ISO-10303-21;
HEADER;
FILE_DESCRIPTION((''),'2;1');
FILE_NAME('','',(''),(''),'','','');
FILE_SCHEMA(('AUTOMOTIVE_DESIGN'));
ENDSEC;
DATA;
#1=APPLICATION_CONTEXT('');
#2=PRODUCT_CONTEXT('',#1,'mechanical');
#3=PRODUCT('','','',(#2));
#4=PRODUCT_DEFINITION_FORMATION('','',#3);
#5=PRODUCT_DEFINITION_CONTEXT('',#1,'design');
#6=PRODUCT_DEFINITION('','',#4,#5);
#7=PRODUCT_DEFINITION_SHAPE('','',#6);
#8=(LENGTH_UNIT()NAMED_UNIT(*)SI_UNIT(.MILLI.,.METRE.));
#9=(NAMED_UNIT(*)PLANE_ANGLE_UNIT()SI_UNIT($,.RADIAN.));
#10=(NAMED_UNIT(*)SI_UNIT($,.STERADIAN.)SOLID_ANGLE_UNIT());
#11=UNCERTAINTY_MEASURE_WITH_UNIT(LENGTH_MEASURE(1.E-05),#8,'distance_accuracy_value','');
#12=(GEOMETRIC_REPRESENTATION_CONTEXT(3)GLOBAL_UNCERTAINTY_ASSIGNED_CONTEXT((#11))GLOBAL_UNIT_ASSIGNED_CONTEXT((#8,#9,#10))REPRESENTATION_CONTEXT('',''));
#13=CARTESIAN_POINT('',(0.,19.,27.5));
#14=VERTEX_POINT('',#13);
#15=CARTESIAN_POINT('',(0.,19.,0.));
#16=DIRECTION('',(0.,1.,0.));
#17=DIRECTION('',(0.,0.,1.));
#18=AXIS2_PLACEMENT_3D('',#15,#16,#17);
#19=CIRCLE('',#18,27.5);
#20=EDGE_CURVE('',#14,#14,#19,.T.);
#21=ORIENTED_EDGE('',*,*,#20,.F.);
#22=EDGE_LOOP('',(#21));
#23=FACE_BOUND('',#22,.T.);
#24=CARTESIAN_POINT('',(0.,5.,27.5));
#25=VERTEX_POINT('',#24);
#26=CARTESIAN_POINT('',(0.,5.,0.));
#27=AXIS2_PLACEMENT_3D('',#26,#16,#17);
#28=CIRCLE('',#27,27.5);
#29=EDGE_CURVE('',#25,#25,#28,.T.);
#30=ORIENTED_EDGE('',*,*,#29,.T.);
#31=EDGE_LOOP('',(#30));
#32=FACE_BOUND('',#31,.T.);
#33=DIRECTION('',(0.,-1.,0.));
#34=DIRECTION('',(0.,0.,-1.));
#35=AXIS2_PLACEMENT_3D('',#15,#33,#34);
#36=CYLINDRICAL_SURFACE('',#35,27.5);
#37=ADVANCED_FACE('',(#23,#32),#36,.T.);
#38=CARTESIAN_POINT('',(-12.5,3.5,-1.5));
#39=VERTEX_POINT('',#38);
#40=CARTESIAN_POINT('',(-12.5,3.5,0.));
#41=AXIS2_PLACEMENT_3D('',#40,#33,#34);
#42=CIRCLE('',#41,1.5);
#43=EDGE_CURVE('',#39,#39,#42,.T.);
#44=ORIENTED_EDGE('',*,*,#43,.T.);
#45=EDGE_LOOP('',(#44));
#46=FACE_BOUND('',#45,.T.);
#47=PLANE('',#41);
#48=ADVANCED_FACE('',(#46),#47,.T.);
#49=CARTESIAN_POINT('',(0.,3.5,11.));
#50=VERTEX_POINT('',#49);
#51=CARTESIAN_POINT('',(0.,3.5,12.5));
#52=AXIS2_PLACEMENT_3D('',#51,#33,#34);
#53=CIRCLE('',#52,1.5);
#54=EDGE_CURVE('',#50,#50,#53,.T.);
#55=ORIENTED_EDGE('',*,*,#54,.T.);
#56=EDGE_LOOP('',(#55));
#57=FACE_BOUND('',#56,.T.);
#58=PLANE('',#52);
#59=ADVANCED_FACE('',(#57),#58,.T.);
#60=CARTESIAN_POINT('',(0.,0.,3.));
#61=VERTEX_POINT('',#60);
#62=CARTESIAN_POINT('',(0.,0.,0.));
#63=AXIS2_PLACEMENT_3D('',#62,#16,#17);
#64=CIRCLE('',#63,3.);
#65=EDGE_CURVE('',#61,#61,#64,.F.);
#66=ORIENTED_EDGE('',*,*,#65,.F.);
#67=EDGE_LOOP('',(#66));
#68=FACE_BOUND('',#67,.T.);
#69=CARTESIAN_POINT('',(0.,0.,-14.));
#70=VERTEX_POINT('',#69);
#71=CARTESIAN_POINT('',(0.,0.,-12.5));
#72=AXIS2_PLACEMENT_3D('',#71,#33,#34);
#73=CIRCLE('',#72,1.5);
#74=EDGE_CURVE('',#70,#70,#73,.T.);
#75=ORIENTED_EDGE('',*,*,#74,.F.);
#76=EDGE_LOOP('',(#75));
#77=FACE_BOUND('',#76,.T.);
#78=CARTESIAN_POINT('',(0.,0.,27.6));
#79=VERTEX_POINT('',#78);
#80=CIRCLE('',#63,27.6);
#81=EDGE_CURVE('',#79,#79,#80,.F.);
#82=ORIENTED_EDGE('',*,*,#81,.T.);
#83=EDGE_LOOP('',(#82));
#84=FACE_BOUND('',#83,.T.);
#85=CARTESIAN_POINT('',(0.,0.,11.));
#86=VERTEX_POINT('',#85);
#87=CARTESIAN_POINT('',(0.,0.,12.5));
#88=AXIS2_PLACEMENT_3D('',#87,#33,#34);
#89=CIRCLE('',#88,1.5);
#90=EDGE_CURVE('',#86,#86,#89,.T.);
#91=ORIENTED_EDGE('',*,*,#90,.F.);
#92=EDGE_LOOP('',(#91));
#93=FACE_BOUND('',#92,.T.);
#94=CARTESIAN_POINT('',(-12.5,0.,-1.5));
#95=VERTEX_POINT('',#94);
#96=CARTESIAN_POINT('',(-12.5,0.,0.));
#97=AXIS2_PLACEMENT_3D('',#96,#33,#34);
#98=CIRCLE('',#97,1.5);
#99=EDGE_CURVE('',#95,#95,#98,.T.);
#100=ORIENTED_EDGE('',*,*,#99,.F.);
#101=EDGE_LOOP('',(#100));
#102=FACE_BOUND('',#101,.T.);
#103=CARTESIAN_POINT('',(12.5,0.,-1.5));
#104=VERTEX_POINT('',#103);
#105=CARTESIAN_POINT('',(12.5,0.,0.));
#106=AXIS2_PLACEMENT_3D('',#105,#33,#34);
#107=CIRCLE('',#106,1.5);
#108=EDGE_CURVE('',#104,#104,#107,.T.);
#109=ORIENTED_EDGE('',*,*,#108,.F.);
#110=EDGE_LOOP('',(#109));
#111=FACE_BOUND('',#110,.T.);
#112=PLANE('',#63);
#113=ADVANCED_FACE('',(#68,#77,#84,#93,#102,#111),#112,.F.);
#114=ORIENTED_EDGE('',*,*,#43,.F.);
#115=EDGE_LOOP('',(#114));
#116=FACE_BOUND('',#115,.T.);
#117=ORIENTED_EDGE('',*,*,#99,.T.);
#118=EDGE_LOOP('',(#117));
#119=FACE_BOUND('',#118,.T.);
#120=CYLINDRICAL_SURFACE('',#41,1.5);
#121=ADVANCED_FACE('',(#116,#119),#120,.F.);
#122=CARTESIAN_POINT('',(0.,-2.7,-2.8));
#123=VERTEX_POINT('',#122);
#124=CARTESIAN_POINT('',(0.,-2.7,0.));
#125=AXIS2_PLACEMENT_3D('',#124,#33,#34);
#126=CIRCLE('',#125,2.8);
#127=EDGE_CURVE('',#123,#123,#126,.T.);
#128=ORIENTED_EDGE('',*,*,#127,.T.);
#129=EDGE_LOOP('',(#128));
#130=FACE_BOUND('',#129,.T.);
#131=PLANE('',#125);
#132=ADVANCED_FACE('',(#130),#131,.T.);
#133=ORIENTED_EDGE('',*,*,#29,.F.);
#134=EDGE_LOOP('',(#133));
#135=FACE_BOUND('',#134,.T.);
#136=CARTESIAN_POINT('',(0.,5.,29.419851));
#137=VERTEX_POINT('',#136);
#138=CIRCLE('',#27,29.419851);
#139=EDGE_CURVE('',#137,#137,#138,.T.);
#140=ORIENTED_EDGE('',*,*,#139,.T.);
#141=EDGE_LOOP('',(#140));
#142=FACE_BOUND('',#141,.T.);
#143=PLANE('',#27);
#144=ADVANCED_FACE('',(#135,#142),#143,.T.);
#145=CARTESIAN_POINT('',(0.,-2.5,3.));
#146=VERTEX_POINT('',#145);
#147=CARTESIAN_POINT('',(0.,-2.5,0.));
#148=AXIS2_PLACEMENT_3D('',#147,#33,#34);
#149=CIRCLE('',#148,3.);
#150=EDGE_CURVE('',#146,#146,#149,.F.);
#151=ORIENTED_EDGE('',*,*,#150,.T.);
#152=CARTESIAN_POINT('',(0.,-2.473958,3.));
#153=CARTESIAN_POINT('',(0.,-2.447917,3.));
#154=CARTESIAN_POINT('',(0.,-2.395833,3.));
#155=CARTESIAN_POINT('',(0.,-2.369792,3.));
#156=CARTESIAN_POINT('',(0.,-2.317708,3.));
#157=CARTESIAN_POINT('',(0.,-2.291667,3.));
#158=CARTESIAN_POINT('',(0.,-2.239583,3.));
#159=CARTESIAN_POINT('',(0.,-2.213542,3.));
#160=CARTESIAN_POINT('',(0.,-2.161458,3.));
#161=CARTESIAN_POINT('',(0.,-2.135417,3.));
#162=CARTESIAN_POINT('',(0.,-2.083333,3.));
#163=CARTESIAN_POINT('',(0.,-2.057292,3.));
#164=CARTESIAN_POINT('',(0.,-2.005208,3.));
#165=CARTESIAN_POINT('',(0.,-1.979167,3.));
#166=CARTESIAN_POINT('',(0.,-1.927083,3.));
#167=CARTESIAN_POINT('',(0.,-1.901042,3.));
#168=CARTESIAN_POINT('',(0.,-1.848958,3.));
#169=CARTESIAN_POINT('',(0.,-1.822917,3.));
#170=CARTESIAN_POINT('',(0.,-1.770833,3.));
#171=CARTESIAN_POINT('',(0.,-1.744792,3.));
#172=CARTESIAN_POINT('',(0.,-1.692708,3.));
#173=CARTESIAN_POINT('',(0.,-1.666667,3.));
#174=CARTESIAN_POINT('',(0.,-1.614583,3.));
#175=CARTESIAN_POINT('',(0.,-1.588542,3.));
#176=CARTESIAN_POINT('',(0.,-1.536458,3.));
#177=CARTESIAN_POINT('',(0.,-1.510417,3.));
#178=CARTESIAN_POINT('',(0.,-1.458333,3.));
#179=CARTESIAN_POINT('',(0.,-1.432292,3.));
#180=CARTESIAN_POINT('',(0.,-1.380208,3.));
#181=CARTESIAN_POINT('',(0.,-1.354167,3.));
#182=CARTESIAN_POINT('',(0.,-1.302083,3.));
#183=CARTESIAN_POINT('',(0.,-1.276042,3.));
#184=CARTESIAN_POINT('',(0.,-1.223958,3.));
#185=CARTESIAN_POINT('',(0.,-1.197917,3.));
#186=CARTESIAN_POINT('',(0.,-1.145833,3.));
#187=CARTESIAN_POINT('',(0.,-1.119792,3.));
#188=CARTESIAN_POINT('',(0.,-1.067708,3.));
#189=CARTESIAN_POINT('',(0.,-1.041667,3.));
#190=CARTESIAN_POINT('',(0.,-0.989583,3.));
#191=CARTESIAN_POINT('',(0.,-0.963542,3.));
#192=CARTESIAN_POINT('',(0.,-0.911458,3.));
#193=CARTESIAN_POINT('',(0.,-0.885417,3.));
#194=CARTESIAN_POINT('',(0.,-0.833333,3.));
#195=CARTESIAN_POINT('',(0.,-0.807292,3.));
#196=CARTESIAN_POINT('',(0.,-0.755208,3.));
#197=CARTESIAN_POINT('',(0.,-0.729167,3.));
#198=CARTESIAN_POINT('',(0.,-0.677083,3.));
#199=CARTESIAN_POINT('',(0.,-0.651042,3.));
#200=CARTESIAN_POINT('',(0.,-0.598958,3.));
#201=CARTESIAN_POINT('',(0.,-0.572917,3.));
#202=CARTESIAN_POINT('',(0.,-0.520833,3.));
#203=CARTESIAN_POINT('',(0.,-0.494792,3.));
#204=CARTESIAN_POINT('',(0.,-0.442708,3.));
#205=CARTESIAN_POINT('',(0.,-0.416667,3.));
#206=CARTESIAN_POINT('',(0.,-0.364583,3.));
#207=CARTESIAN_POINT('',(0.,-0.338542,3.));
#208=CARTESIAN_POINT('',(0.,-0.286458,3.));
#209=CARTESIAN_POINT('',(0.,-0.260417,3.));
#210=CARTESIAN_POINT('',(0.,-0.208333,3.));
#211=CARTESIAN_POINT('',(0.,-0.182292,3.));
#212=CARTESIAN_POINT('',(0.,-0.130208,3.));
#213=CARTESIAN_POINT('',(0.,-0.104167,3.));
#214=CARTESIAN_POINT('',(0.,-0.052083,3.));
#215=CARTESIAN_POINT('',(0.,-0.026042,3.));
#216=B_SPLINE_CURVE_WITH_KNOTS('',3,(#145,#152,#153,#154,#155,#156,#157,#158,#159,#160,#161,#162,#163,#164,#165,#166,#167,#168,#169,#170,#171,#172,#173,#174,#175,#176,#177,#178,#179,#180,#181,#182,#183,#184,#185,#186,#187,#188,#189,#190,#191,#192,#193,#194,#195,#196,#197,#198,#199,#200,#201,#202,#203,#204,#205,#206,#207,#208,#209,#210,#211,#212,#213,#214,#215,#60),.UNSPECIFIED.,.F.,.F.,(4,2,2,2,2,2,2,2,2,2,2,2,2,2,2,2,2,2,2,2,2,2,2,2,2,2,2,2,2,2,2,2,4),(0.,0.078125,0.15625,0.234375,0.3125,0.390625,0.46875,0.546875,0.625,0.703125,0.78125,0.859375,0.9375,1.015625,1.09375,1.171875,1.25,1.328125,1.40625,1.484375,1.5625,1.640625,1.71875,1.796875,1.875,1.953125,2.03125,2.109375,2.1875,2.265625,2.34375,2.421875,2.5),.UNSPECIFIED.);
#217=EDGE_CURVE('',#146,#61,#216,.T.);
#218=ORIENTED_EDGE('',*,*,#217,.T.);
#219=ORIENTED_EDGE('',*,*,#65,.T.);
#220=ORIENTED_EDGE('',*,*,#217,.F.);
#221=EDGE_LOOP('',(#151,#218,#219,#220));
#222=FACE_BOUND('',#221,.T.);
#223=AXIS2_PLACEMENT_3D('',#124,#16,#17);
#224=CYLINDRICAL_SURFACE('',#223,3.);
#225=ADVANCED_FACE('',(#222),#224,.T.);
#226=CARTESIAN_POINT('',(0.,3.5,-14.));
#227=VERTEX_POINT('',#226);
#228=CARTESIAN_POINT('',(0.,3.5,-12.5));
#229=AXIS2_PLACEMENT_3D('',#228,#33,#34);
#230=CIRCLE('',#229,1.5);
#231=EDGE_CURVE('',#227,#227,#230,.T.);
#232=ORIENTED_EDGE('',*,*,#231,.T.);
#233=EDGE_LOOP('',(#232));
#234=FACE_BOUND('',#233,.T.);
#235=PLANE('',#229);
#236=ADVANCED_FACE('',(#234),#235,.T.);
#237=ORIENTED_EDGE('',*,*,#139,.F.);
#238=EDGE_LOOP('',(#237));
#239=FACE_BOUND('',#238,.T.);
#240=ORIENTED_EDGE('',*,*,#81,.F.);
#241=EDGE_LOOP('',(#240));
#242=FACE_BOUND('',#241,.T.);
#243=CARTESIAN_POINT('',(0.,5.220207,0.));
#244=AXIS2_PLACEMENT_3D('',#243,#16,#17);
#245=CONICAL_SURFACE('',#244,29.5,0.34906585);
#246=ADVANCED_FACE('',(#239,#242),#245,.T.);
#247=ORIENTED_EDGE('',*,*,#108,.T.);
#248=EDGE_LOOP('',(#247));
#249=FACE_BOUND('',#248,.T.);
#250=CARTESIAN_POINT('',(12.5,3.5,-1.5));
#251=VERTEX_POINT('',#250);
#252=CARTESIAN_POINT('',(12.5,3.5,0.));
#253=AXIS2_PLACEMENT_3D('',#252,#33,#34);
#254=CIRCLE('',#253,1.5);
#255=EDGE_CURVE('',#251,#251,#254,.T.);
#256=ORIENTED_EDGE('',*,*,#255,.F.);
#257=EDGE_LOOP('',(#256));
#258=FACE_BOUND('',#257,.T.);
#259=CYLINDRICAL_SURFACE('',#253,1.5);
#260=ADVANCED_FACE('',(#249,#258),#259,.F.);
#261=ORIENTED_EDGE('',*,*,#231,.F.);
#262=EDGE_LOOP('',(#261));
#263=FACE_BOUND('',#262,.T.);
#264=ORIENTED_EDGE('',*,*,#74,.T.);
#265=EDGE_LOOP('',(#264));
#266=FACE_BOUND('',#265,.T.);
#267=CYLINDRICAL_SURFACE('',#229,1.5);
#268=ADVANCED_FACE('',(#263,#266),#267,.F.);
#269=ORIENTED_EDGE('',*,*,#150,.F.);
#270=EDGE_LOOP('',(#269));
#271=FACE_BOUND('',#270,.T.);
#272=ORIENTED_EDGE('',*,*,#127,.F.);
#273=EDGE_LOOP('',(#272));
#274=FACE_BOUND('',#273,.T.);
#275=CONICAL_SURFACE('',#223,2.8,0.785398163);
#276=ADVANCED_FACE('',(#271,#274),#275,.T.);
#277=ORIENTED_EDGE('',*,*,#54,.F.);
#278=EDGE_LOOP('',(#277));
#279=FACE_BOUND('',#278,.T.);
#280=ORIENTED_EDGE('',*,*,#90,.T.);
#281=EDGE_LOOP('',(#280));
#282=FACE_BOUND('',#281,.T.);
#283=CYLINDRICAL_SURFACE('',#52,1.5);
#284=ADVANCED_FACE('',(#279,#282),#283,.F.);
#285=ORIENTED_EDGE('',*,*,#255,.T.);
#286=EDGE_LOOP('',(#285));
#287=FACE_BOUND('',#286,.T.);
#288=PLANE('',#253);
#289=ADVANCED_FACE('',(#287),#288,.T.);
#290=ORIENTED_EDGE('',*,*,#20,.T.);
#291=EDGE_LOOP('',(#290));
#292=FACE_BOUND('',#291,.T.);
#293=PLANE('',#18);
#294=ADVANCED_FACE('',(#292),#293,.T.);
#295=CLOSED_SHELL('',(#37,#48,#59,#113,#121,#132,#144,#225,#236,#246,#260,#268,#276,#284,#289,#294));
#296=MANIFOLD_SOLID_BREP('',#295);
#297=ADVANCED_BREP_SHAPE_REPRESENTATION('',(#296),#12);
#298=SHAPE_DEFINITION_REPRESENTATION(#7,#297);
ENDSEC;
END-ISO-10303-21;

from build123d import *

# Parameters (mm, degrees)
SKETCH1_R           = 29.5
BOSS_EXTRUDE1_DEPTH = 5
SKETCH2_R           = 27.5
BOSS_EXTRUDE2_DEPTH = 14
CHAMFER1_SIZE       = 5.220207097
CHAMFER1_SIZE_2     = 1.9
SKETCH3_R           = 1.5
CUT_EXTRUDE1_DEPTH  = 3.5
SKETCH4_R           = 3
BOSS_EXTRUDE3_DEPTH = 2.7
CHAMFER2_SIZE       = 0.2


with BuildPart() as part:
    # Sketch1 → Boss-Extrude1 (new body)
    with BuildSketch(Plane(origin=(0, 0, 0), x_dir=(1, 0, 0), z_dir=(0, 1, 0))):
        with Locations(Location((0, 0, 0), (0, 0, 270))):
            Circle(SKETCH1_R)
    extrude(amount=BOSS_EXTRUDE1_DEPTH)

    # Sketch2 → Boss-Extrude2 (add)
    with BuildSketch(Plane(origin=(0, 5, 0), x_dir=(1, 0, 0), z_dir=(0, 1, 0))):
        with Locations(Location((0, 0, 0), (0, 0, 270))):
            Circle(SKETCH2_R)
    extrude(amount=BOSS_EXTRUDE2_DEPTH)

    # Chamfer1
    # the kernel refuses this chamfer: 5.220207097, 1.9 mm, written as the material it takes off along each edge
    with BuildSketch(Plane(origin=(0, 0, 0), x_dir=(0, 0, 1), z_dir=(-1, 0, 0))) as chamfer1_piece_1:
        Polygon((29.5, CHAMFER1_SIZE), (29.5 - CHAMFER1_SIZE_2, 0), (29.5, 0), align=None)
    revolve(axis=Axis((0, 0, 0), (0, 1, 0)), mode=Mode.SUBTRACT)

    # Sketch3 → Cut-Extrude1 (cut)
    with BuildSketch(Plane.XZ):
        with Locations(Location((0, 12.5, 0), (0, 0, 270))):
            Circle(SKETCH3_R)
        with Locations(Location((12.5, 0, 0), (0, 0, 270))):
            Circle(SKETCH3_R)
        with Locations(Location((0, -12.5, 0), (0, 0, 270))):
            Circle(SKETCH3_R)
        with Locations(Location((-12.5, 0, 0), (0, 0, 270))):
            Circle(SKETCH3_R)
    extrude(amount=-CUT_EXTRUDE1_DEPTH, mode=Mode.SUBTRACT)

    # Sketch4 → Boss-Extrude3 (add)
    with BuildSketch(Plane.XZ):
        with Locations(Location((0, 0, 0), (0, 0, 90))):
            Circle(SKETCH4_R)
    extrude(amount=BOSS_EXTRUDE3_DEPTH)

    # Chamfer2
    chamfer2_edges = [part.edges().sort_by_distance(p)[0] for p in [
        (0, -2.7, -3),
    ]]
    chamfer(chamfer2_edges, length=CHAMFER2_SIZE)


solid = part.part
